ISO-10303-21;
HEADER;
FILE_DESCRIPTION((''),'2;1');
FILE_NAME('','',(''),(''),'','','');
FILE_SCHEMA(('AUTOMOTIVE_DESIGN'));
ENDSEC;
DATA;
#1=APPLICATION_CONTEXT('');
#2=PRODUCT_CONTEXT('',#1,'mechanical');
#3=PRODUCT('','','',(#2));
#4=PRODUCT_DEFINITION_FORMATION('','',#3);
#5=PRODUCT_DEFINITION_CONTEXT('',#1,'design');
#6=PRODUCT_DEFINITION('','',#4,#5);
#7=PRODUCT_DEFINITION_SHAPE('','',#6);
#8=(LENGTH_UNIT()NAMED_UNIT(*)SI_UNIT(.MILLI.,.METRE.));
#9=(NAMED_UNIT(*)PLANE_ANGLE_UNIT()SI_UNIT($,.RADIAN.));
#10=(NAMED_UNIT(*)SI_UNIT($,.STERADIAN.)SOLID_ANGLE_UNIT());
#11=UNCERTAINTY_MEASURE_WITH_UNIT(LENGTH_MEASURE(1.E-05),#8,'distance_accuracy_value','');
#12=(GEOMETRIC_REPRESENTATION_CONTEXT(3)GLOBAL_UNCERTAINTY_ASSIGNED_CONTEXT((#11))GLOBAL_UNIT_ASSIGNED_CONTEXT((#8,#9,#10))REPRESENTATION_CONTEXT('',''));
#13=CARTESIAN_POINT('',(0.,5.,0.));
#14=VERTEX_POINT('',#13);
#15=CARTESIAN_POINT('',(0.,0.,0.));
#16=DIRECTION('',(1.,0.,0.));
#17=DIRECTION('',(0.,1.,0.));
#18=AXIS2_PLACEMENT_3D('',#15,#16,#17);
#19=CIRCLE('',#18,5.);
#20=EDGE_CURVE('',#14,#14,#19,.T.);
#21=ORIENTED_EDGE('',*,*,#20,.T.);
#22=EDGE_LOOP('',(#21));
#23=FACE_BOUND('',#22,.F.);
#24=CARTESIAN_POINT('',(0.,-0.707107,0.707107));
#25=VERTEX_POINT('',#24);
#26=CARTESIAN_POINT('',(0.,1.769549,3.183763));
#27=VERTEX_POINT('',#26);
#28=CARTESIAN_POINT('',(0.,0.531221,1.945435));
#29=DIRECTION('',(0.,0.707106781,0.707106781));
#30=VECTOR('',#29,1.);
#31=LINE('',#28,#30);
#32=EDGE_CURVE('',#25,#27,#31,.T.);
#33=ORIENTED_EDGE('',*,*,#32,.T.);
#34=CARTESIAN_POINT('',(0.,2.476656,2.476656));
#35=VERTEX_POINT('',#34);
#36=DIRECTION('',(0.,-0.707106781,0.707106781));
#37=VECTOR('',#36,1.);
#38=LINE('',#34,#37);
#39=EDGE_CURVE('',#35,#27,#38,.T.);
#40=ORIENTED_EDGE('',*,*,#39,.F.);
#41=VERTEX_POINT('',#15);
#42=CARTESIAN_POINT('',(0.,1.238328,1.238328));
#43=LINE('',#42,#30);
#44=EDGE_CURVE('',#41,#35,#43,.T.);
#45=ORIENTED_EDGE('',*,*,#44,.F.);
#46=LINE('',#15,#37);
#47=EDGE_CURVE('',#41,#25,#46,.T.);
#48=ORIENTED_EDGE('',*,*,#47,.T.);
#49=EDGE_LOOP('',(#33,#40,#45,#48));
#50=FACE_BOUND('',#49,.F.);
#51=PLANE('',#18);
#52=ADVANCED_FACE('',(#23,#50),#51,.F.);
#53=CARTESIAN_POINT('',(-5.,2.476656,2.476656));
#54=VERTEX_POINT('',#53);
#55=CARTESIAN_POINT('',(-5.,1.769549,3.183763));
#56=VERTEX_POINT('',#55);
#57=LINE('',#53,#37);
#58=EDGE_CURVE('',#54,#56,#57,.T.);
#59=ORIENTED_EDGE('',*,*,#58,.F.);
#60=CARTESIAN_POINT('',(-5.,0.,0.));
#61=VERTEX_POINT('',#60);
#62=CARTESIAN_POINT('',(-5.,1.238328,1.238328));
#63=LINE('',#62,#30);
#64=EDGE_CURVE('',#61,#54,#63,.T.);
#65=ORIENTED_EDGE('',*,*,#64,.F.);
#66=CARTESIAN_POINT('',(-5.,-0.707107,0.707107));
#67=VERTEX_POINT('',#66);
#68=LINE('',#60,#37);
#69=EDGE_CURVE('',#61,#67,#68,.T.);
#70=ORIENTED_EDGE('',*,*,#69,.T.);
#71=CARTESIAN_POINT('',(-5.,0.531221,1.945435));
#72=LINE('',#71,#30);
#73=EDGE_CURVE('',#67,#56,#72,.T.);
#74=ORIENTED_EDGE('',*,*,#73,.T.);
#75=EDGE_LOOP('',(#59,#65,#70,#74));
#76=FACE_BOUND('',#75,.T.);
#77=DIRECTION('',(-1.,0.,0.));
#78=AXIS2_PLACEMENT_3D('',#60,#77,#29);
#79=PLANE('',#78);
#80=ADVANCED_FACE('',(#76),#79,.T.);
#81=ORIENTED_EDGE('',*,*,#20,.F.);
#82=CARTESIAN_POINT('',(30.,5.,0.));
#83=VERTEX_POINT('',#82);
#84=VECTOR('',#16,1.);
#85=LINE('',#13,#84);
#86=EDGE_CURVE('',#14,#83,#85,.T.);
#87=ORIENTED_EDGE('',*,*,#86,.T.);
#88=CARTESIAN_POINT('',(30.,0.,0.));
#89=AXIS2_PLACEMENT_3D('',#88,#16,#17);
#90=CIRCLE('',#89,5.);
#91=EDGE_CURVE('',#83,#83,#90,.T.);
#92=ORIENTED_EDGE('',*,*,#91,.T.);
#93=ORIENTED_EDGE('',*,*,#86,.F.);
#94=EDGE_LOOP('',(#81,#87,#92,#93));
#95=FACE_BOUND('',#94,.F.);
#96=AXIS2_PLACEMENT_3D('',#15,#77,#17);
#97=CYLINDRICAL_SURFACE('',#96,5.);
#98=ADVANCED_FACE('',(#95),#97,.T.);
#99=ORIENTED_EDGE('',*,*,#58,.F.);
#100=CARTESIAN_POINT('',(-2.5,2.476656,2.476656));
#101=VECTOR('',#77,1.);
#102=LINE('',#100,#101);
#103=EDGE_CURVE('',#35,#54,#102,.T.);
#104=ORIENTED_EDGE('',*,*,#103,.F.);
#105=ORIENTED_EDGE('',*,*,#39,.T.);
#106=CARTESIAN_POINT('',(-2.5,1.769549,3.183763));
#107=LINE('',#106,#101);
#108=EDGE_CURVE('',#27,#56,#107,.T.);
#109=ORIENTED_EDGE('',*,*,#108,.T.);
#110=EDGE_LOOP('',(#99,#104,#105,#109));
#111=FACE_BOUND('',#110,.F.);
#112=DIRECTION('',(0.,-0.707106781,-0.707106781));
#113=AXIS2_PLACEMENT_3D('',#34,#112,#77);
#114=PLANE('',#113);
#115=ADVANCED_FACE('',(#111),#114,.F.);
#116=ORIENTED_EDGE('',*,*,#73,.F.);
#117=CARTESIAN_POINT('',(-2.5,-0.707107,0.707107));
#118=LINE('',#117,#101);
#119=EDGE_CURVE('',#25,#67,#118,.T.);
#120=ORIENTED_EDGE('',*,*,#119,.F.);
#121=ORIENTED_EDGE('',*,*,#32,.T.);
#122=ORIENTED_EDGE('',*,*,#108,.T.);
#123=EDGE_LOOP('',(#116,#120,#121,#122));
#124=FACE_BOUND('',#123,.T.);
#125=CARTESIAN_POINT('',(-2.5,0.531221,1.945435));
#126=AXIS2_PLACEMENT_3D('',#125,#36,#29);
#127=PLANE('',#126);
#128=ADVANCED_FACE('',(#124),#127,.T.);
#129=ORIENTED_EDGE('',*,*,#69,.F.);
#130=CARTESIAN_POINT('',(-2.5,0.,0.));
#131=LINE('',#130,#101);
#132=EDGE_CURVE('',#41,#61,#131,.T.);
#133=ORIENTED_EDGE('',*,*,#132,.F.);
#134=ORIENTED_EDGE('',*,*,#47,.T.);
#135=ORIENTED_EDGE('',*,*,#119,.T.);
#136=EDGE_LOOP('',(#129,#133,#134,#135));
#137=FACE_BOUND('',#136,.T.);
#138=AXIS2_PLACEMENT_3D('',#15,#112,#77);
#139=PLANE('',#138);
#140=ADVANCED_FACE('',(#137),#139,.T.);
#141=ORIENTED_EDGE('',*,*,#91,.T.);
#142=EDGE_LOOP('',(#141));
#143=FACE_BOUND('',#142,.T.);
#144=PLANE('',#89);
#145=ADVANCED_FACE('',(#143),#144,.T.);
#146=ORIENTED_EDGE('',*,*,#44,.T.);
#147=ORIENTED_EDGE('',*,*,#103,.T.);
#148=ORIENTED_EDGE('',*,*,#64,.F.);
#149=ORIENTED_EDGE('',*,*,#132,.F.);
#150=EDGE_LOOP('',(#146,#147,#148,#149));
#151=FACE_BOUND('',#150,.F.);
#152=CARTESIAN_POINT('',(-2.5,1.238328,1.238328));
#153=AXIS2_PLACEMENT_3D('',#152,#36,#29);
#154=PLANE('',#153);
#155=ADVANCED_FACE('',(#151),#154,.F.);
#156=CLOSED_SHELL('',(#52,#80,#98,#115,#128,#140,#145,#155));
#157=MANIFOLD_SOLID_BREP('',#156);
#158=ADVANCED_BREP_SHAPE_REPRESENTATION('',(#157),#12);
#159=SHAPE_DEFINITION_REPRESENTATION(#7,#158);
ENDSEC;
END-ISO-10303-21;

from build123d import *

# Parameters (mm, degrees)
F0_R     = 5
F1_DEPTH = 30
F2_E1_W  = 3.5025208565
F2_E1_H  = 5
F3_DEPTH = 1


with BuildPart() as f1:
    # F0 (on Right) → F1 (new body)
    with BuildSketch(Plane.YZ):
        Circle(F0_R)
    extrude(amount=F1_DEPTH)

    # F2_E1 (on explicit) → F3 (join)
    with BuildSketch(Plane(origin=(0, 0, 0), x_dir=(0, 0.7071067812, 0.7071067812), z_dir=(0, -0.7071067812, 0.7071067812))):
        with Locations((1.7512604282, 2.5)):
            Rectangle(F2_E1_W, F2_E1_H)
    extrude(amount=F3_DEPTH)


solid = f1.part
